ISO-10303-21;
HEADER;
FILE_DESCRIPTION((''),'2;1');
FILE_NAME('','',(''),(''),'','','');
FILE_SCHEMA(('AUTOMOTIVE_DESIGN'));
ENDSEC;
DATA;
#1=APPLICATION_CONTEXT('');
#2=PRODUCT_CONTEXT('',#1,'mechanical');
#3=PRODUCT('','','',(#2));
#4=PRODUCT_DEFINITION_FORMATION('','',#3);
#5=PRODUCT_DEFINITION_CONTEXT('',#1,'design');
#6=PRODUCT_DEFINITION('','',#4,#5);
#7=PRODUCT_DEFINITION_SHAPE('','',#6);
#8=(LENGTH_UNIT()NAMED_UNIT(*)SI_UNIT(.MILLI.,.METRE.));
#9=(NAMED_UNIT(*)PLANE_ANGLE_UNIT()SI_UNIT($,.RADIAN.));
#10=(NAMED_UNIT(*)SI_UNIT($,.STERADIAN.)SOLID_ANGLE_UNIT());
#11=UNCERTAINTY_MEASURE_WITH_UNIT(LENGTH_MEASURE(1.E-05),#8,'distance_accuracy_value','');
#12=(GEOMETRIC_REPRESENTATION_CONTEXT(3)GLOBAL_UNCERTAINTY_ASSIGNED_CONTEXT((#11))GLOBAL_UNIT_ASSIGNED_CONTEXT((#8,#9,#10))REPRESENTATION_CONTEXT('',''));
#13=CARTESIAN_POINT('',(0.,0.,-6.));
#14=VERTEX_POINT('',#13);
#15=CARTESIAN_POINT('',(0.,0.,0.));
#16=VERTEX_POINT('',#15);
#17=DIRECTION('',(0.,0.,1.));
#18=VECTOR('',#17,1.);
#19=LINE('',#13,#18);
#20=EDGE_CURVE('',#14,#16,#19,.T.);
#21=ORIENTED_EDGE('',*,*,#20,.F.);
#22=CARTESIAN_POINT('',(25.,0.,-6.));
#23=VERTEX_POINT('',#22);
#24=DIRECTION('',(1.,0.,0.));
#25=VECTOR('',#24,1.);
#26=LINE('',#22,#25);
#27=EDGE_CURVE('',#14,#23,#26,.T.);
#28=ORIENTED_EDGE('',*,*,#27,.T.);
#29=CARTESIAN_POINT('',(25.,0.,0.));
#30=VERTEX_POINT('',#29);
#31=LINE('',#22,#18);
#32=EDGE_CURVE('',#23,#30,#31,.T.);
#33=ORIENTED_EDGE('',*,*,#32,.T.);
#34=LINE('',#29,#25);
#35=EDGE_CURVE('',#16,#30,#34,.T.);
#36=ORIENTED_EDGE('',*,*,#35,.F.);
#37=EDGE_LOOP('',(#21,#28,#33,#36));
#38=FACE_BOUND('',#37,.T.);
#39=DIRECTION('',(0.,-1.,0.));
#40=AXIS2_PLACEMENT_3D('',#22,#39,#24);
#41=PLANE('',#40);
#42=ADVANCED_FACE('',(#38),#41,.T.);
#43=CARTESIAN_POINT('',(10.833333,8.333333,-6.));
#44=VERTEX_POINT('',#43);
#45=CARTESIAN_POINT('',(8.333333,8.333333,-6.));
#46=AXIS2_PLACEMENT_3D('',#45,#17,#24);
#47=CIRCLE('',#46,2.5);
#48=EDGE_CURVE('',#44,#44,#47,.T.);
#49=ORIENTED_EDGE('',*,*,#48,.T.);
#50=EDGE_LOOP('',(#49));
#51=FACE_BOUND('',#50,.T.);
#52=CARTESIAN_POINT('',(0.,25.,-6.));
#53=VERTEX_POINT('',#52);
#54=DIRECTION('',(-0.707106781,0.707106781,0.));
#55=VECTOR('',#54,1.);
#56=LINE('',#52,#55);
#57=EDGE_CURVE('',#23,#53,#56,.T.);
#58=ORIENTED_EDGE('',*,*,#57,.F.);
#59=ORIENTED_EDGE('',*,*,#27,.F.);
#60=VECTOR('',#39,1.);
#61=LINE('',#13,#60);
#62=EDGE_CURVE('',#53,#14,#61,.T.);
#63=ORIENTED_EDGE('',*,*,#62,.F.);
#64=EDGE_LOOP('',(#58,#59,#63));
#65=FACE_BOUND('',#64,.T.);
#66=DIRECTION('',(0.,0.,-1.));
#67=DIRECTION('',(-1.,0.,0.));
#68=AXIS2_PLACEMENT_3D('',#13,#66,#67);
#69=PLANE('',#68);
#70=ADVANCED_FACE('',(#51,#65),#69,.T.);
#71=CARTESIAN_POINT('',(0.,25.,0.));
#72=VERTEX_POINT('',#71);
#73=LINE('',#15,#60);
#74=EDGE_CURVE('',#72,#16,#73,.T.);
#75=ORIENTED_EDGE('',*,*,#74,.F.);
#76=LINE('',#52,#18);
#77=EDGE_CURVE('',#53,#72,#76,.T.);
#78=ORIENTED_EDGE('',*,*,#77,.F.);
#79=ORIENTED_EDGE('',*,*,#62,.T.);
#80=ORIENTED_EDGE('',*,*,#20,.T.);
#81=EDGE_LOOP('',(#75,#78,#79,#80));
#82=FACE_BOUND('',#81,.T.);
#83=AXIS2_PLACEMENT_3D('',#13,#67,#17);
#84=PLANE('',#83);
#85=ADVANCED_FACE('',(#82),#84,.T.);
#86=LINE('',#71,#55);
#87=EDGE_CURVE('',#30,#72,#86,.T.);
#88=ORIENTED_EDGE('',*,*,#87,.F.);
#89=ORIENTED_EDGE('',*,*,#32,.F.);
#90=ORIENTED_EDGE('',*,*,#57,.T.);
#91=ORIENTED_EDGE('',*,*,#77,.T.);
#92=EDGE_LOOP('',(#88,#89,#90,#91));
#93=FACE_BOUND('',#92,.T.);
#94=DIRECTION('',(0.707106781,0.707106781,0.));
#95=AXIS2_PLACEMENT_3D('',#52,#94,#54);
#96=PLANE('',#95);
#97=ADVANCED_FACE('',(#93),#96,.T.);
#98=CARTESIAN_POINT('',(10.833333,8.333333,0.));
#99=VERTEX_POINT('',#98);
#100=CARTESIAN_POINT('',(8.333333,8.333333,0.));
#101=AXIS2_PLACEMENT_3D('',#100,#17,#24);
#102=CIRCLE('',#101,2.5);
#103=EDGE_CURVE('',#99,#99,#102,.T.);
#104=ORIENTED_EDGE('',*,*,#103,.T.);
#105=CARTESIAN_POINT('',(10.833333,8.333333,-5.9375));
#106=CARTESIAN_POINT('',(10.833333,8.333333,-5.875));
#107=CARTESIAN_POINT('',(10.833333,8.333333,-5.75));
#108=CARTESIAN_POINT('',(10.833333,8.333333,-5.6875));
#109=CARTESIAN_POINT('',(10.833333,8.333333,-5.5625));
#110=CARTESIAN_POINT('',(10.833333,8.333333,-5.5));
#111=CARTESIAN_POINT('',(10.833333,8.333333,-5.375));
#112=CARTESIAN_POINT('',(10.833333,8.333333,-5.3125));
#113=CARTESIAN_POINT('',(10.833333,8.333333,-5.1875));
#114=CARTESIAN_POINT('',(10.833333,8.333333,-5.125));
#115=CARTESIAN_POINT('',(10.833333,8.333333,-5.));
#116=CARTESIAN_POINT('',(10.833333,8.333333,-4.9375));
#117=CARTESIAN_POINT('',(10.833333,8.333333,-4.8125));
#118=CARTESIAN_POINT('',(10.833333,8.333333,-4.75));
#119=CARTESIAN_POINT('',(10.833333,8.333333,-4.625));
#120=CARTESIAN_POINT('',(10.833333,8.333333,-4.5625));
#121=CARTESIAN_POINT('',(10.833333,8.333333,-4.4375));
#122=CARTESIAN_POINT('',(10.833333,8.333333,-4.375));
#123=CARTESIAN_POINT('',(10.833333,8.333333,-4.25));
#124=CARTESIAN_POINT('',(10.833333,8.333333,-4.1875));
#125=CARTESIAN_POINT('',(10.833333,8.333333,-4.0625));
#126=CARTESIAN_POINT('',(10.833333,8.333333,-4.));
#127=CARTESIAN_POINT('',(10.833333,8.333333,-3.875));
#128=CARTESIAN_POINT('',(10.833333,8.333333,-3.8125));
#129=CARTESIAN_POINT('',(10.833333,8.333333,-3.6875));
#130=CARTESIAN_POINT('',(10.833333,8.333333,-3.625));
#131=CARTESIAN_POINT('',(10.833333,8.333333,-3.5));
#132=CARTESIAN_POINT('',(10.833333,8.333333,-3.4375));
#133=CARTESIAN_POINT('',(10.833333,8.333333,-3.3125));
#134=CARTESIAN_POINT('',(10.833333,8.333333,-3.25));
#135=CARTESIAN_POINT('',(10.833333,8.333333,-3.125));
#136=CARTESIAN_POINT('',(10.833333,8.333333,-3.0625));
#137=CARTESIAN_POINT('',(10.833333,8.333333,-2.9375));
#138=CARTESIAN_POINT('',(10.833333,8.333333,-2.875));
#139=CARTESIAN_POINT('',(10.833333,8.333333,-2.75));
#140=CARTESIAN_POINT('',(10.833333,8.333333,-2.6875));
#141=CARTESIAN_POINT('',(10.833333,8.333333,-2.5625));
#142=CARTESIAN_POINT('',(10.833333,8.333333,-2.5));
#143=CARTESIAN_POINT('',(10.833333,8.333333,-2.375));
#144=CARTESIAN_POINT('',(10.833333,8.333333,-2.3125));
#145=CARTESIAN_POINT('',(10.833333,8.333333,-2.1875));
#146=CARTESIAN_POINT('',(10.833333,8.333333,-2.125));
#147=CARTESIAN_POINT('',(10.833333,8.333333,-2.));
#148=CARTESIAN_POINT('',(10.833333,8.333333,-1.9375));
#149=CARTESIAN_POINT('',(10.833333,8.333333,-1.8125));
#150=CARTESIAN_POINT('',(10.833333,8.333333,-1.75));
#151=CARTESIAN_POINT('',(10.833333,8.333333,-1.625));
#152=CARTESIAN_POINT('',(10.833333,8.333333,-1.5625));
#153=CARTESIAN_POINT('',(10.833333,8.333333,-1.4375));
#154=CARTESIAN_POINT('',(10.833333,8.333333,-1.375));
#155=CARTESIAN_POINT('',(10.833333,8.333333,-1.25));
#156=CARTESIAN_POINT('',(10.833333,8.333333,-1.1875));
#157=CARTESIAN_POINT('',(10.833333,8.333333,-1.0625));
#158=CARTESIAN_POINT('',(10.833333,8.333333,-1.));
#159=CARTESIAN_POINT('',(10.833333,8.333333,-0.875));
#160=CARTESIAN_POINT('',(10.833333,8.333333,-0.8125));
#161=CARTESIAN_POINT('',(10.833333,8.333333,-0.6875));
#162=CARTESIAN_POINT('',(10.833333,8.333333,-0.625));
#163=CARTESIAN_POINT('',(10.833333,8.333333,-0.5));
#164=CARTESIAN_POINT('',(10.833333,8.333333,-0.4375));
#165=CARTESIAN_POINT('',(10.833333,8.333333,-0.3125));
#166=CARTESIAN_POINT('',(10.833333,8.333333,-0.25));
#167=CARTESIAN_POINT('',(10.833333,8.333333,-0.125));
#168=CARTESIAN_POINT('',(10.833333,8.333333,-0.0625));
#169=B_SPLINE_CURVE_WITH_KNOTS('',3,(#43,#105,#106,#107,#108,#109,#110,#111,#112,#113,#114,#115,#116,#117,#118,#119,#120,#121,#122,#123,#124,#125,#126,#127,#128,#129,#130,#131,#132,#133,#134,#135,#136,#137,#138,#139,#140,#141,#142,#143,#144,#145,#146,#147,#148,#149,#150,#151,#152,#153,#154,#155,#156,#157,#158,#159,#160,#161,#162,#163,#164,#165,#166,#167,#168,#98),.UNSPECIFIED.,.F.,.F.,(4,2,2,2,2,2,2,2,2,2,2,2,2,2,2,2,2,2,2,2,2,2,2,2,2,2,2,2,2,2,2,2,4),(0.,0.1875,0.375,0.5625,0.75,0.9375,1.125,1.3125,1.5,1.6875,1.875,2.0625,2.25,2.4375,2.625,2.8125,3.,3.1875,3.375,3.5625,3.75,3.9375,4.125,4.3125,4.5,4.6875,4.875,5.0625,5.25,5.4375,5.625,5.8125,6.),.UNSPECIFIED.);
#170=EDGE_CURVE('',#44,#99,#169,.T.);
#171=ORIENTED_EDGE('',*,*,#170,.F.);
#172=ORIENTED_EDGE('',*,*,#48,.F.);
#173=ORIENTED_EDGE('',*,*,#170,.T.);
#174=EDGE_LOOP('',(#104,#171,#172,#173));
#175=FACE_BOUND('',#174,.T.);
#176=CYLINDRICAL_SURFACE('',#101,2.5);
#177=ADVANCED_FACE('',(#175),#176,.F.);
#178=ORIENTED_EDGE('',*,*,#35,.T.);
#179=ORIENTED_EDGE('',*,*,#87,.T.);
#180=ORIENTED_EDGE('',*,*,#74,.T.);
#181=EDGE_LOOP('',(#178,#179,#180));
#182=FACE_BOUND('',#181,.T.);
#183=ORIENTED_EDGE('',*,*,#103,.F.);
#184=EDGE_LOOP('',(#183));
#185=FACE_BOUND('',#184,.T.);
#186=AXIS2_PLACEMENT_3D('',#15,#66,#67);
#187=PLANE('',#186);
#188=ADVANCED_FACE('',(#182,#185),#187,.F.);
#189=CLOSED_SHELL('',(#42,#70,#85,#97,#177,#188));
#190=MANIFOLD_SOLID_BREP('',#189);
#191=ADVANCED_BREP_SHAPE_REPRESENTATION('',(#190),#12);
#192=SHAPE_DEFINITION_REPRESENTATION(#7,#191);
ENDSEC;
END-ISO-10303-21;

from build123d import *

# Parameters (mm, degrees)
T_LE_DE_BASE_PLI_E1_DEPTH = 6
TROU_TARAUD_M61_D         = 5


# Sheet-metal steps are written as plain solids
with BuildPart() as part:
    # Esquisse2 → Tôle de base pliée1 (new body)
    with BuildSketch(Plane.XY):
        Polygon((0, 0), (0, 25), (25, 0), align=None)
    extrude(amount=-T_LE_DE_BASE_PLI_E1_DEPTH)

    # Trou taraudé M61 (through all)
    with Locations(Plane.XY):
        with Locations((8.333333333, 8.333333333)):
            Hole(TROU_TARAUD_M61_D / 2)


solid = part.part
